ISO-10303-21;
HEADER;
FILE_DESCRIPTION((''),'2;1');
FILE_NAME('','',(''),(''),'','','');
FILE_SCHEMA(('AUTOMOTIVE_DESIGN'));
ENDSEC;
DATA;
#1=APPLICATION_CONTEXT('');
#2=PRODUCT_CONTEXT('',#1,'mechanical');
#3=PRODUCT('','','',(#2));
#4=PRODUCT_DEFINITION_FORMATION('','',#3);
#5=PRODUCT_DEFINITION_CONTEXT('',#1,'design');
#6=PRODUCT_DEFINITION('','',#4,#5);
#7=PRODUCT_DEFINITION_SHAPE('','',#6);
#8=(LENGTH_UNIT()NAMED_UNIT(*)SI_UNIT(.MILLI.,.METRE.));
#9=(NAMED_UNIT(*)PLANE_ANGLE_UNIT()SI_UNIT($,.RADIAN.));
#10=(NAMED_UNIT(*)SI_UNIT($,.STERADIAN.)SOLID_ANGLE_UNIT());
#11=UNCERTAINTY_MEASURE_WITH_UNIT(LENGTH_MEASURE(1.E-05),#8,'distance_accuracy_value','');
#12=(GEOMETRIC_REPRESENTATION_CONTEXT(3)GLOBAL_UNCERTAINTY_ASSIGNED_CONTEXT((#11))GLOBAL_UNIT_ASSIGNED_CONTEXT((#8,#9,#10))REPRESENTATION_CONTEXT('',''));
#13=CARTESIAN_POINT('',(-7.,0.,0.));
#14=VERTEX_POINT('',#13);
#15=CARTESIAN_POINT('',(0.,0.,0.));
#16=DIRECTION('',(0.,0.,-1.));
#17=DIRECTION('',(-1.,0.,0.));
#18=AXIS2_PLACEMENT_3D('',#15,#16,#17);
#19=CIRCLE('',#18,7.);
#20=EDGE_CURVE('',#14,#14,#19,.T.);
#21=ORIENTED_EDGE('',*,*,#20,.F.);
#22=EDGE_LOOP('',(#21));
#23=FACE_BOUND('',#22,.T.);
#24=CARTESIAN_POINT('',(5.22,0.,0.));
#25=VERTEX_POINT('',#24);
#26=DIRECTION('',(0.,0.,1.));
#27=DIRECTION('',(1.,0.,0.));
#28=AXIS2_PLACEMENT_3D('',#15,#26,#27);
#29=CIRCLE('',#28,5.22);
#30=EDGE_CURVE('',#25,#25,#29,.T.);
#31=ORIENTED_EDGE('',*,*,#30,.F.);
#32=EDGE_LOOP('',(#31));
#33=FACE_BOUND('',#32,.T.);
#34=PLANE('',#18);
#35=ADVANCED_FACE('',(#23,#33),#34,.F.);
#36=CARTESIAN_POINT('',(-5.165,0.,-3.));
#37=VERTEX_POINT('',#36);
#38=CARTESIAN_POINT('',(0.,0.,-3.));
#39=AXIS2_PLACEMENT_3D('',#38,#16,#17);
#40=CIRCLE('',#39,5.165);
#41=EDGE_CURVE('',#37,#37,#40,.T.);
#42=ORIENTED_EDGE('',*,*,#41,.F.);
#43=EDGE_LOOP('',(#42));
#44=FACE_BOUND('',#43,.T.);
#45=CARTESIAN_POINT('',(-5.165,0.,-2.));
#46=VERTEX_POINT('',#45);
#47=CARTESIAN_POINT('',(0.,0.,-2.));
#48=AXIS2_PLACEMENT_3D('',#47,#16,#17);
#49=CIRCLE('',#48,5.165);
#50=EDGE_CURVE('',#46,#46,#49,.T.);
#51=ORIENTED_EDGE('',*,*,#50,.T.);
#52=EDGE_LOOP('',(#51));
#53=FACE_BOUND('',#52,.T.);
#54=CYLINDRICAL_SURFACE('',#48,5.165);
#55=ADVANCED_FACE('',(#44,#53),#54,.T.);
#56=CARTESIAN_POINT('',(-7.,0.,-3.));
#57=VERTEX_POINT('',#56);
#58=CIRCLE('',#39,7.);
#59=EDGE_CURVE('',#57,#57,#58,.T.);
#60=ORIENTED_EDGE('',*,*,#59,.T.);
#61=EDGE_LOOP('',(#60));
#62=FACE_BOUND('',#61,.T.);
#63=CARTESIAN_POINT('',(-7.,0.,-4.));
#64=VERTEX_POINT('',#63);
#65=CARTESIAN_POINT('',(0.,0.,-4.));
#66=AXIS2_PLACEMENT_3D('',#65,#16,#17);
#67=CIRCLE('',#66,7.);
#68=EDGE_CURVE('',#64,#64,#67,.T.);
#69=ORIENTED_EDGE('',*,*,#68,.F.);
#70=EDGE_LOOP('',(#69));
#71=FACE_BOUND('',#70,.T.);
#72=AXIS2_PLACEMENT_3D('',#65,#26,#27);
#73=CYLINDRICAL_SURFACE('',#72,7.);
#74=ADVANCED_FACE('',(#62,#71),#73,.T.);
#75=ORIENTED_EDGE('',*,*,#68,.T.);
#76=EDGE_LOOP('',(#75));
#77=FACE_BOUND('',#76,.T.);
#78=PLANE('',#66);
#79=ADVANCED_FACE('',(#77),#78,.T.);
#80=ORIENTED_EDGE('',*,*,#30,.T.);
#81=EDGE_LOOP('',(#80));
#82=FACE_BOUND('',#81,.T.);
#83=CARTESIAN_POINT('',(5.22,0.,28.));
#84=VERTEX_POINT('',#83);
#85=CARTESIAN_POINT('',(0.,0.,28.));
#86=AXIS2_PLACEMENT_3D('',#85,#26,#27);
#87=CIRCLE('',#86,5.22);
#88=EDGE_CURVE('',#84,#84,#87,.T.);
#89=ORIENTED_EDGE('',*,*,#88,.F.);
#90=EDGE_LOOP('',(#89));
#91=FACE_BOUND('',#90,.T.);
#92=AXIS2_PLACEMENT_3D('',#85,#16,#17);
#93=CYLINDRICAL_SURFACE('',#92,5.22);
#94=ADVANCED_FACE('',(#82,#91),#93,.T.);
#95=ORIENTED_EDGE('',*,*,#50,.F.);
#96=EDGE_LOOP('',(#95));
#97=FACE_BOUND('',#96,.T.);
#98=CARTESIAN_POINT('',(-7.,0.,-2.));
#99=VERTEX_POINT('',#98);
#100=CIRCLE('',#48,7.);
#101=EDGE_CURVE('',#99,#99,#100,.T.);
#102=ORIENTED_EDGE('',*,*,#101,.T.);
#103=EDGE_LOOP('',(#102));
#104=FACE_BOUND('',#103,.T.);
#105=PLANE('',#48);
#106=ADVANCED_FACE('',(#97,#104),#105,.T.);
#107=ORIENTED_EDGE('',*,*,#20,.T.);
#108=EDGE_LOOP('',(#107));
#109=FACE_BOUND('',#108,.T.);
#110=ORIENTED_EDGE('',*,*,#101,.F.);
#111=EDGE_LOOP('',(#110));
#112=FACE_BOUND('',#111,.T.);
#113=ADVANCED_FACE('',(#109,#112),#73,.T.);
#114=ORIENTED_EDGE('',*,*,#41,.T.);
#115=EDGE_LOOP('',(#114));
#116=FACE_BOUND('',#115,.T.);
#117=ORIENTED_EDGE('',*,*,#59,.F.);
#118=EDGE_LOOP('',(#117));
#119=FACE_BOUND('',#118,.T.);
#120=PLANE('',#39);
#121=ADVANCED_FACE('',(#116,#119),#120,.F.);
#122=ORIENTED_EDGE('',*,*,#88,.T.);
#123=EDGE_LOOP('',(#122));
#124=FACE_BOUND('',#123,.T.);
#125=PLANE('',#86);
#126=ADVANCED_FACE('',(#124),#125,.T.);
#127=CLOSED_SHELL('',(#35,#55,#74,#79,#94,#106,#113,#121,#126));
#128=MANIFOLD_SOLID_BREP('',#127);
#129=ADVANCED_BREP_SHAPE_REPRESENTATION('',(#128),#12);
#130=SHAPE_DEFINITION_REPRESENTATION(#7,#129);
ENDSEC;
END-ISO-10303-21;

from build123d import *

# Parameters (mm, degrees)
SKETCH1_R                = 5.22
BOSS_EXTRUDE1_DEPTH      = 28
SKETCH2_R                = 7
BOSS_EXTRUDE2_DEPTH      = 4
CUT_EXTRUDE2_START       = -3
CUT_EXTRUDE2_OUTLINE_R   = 7
CUT_EXTRUDE2_OUTLINE_R_2 = 5.165
CUT_EXTRUDE2_DEPTH       = 1


# Read off the part's stored shape, not the designer's step: Cut-Extrude2
with BuildPart() as part:
    # Sketch1 → Boss-Extrude1 (new body)
    with BuildSketch(Plane.XY):
        Circle(SKETCH1_R)
    extrude(amount=BOSS_EXTRUDE1_DEPTH)

    # Sketch2 → Boss-Extrude2 (add)
    with BuildSketch(Plane(origin=(0, 0, 0), x_dir=(-1, 0, 0), z_dir=(0, 0, -1))):
        Circle(SKETCH2_R)
    extrude(amount=BOSS_EXTRUDE2_DEPTH)

    # Cut-Extrude2 outline → Cut-Extrude2 (cut)
    with BuildSketch(Plane.XY.offset(CUT_EXTRUDE2_START)):
        Circle(CUT_EXTRUDE2_OUTLINE_R)
        Circle(CUT_EXTRUDE2_OUTLINE_R_2, mode=Mode.SUBTRACT)
    extrude(amount=CUT_EXTRUDE2_DEPTH, mode=Mode.SUBTRACT)


solid = part.part
